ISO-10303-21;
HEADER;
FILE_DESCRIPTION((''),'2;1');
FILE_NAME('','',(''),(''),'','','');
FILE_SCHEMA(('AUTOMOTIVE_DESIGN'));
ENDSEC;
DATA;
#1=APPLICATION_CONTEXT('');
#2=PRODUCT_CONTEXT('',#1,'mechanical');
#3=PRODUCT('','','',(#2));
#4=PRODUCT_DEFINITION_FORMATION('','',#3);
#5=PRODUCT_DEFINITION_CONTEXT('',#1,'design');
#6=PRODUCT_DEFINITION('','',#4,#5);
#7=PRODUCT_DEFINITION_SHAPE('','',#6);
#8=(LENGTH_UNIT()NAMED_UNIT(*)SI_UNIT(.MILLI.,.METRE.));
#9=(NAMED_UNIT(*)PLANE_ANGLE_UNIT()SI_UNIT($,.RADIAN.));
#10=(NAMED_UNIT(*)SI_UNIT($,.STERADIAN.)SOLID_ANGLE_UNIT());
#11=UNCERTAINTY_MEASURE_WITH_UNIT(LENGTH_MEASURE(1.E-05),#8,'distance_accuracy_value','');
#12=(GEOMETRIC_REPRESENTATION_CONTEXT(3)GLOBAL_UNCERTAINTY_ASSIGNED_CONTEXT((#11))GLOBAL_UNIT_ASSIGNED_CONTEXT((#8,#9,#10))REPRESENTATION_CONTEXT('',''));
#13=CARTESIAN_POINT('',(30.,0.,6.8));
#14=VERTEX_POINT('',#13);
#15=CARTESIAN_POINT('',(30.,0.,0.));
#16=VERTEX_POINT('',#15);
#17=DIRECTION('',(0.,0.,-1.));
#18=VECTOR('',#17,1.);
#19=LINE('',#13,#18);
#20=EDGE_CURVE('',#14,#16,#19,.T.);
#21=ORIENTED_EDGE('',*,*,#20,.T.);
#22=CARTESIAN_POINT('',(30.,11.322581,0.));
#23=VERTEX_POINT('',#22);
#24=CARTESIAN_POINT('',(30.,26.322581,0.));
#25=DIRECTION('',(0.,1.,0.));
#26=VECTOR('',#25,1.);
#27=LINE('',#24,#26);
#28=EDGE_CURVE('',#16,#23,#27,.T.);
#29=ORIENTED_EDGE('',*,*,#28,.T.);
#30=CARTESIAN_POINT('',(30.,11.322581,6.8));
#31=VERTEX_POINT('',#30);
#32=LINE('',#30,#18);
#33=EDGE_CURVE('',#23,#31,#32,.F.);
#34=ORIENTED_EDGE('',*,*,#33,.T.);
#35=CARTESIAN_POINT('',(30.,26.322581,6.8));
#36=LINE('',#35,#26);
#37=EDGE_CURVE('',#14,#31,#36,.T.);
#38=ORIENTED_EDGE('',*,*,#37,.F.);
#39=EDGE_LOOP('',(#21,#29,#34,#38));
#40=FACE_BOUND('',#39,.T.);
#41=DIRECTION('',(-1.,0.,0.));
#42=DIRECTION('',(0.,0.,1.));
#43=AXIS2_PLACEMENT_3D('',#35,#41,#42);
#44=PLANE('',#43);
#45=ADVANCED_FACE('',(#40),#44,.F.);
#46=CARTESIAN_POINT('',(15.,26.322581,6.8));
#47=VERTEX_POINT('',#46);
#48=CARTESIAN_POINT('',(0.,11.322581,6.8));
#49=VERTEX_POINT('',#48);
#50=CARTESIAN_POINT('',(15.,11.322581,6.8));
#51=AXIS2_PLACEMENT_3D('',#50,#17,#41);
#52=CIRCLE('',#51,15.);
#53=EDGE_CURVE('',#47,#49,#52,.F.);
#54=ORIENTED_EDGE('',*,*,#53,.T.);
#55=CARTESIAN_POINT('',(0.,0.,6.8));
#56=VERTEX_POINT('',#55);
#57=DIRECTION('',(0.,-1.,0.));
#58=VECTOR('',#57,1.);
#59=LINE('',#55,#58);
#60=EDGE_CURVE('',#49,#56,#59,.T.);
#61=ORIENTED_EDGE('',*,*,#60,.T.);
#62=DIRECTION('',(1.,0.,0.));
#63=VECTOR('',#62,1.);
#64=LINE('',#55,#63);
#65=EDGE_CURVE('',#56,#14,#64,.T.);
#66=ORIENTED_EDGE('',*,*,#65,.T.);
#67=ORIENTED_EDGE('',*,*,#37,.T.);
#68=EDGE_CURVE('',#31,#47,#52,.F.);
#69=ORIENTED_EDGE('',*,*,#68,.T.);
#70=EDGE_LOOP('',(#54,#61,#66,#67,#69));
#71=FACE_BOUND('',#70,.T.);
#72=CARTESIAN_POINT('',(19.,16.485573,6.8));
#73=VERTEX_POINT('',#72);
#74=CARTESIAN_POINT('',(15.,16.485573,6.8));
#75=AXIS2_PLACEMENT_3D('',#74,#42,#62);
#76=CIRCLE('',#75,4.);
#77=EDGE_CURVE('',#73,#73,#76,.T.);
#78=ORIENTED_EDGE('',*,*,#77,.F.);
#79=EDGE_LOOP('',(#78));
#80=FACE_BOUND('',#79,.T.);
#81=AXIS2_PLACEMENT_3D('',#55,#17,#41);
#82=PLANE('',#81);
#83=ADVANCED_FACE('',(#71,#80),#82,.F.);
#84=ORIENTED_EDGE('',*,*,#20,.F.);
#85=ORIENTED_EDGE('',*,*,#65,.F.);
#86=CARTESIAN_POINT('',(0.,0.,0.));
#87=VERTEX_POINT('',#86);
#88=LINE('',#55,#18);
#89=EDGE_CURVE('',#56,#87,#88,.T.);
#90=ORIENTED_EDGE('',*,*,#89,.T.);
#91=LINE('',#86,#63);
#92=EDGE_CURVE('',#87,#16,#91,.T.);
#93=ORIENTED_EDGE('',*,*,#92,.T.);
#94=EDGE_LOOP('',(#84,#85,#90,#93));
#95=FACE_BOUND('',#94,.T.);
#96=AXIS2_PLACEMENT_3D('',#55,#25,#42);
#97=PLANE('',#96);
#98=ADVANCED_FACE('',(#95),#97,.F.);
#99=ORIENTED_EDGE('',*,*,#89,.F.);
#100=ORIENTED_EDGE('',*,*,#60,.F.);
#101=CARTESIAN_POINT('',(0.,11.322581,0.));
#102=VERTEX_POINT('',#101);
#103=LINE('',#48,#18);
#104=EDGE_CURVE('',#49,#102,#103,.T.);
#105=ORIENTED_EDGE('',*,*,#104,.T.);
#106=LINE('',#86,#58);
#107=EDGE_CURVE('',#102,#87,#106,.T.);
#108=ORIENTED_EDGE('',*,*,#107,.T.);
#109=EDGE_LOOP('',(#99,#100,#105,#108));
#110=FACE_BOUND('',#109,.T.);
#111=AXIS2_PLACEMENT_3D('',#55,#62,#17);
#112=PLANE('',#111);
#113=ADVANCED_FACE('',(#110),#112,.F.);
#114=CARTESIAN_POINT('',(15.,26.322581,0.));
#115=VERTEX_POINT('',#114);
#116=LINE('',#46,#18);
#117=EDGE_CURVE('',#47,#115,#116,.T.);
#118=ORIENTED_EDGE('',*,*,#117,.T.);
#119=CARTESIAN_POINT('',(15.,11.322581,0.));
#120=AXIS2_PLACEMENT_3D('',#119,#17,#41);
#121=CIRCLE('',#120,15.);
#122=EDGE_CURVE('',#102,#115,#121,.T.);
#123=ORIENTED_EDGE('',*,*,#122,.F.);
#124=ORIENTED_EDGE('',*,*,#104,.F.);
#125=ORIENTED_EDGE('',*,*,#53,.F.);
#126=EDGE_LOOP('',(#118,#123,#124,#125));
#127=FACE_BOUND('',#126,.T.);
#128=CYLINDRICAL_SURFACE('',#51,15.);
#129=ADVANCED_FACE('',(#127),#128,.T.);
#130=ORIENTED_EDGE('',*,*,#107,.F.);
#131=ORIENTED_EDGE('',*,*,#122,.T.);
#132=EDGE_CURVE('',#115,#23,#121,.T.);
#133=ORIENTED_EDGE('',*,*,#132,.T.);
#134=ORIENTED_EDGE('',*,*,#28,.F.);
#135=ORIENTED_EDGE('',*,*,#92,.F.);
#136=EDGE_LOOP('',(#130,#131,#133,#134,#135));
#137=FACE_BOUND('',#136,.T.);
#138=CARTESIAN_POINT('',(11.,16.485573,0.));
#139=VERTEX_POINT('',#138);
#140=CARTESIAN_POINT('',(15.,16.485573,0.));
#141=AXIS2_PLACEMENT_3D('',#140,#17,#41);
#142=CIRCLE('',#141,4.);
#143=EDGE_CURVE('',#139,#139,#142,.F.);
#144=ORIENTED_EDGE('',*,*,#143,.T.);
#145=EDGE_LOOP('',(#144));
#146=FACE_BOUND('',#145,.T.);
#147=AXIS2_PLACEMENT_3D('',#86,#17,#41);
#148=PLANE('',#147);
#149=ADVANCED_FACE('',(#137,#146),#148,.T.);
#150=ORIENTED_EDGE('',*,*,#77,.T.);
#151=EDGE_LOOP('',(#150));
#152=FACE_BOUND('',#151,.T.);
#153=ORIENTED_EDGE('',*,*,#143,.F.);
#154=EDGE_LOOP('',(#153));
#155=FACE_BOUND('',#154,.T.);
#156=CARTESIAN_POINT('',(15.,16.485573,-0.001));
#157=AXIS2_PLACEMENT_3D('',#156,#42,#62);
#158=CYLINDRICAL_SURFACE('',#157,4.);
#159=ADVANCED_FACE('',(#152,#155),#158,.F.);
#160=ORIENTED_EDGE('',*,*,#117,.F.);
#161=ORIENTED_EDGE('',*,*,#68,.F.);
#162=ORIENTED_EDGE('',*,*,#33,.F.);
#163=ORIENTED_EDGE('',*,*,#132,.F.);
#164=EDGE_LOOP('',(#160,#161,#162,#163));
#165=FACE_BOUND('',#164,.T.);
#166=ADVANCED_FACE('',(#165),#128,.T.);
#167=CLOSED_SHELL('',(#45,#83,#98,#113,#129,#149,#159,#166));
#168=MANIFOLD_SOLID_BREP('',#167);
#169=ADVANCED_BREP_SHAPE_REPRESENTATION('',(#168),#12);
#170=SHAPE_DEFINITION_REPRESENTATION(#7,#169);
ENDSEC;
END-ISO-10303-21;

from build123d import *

# Parameters (mm, degrees)
CROQUIS1_W              = 30
CROQUIS1_H              = 26.322580645
SALIENTE_EXTRUIR1_DEPTH = 6.8
REDONDEO1_R             = 15
CORTAR_EXTRUIR1_REACH   = 42.486
CROQUIS2_R              = 4


with BuildPart() as part:
    # Croquis1 → Saliente-Extruir1 (new body)
    with BuildSketch(Plane.XY):
        with Locations((15, 13.161290323)):
            Rectangle(CROQUIS1_W, CROQUIS1_H)
    extrude(amount=SALIENTE_EXTRUIR1_DEPTH)

    # Redondeo1
    redondeo1_edges = [part.edges().sort_by_distance(p)[0] for p in [
        (0, 26.322580645, 3.4),
        (30, 26.322580645, 3.4),
    ]]
    fillet(redondeo1_edges, radius=REDONDEO1_R - 0.0001)  # a hair under: the kernel refuses the full size

    # Croquis2 → Cortar-Extruir1 (cut, up to next)
    with BuildSketch(Plane.XY.offset(6.8), mode=Mode.PRIVATE) as cortar_extruir1_sk1:
        with Locations((15, 16.485572524)):
            Circle(CROQUIS2_R)
    cortar_extruir1_tool1 = extrude(cortar_extruir1_sk1.sketch, amount=-CORTAR_EXTRUIR1_REACH, mode=Mode.PRIVATE) & part.part
    add(cortar_extruir1_tool1.solids().sort_by_distance((15, 16.485573, 6.8))[0], mode=Mode.SUBTRACT)


solid = part.part
